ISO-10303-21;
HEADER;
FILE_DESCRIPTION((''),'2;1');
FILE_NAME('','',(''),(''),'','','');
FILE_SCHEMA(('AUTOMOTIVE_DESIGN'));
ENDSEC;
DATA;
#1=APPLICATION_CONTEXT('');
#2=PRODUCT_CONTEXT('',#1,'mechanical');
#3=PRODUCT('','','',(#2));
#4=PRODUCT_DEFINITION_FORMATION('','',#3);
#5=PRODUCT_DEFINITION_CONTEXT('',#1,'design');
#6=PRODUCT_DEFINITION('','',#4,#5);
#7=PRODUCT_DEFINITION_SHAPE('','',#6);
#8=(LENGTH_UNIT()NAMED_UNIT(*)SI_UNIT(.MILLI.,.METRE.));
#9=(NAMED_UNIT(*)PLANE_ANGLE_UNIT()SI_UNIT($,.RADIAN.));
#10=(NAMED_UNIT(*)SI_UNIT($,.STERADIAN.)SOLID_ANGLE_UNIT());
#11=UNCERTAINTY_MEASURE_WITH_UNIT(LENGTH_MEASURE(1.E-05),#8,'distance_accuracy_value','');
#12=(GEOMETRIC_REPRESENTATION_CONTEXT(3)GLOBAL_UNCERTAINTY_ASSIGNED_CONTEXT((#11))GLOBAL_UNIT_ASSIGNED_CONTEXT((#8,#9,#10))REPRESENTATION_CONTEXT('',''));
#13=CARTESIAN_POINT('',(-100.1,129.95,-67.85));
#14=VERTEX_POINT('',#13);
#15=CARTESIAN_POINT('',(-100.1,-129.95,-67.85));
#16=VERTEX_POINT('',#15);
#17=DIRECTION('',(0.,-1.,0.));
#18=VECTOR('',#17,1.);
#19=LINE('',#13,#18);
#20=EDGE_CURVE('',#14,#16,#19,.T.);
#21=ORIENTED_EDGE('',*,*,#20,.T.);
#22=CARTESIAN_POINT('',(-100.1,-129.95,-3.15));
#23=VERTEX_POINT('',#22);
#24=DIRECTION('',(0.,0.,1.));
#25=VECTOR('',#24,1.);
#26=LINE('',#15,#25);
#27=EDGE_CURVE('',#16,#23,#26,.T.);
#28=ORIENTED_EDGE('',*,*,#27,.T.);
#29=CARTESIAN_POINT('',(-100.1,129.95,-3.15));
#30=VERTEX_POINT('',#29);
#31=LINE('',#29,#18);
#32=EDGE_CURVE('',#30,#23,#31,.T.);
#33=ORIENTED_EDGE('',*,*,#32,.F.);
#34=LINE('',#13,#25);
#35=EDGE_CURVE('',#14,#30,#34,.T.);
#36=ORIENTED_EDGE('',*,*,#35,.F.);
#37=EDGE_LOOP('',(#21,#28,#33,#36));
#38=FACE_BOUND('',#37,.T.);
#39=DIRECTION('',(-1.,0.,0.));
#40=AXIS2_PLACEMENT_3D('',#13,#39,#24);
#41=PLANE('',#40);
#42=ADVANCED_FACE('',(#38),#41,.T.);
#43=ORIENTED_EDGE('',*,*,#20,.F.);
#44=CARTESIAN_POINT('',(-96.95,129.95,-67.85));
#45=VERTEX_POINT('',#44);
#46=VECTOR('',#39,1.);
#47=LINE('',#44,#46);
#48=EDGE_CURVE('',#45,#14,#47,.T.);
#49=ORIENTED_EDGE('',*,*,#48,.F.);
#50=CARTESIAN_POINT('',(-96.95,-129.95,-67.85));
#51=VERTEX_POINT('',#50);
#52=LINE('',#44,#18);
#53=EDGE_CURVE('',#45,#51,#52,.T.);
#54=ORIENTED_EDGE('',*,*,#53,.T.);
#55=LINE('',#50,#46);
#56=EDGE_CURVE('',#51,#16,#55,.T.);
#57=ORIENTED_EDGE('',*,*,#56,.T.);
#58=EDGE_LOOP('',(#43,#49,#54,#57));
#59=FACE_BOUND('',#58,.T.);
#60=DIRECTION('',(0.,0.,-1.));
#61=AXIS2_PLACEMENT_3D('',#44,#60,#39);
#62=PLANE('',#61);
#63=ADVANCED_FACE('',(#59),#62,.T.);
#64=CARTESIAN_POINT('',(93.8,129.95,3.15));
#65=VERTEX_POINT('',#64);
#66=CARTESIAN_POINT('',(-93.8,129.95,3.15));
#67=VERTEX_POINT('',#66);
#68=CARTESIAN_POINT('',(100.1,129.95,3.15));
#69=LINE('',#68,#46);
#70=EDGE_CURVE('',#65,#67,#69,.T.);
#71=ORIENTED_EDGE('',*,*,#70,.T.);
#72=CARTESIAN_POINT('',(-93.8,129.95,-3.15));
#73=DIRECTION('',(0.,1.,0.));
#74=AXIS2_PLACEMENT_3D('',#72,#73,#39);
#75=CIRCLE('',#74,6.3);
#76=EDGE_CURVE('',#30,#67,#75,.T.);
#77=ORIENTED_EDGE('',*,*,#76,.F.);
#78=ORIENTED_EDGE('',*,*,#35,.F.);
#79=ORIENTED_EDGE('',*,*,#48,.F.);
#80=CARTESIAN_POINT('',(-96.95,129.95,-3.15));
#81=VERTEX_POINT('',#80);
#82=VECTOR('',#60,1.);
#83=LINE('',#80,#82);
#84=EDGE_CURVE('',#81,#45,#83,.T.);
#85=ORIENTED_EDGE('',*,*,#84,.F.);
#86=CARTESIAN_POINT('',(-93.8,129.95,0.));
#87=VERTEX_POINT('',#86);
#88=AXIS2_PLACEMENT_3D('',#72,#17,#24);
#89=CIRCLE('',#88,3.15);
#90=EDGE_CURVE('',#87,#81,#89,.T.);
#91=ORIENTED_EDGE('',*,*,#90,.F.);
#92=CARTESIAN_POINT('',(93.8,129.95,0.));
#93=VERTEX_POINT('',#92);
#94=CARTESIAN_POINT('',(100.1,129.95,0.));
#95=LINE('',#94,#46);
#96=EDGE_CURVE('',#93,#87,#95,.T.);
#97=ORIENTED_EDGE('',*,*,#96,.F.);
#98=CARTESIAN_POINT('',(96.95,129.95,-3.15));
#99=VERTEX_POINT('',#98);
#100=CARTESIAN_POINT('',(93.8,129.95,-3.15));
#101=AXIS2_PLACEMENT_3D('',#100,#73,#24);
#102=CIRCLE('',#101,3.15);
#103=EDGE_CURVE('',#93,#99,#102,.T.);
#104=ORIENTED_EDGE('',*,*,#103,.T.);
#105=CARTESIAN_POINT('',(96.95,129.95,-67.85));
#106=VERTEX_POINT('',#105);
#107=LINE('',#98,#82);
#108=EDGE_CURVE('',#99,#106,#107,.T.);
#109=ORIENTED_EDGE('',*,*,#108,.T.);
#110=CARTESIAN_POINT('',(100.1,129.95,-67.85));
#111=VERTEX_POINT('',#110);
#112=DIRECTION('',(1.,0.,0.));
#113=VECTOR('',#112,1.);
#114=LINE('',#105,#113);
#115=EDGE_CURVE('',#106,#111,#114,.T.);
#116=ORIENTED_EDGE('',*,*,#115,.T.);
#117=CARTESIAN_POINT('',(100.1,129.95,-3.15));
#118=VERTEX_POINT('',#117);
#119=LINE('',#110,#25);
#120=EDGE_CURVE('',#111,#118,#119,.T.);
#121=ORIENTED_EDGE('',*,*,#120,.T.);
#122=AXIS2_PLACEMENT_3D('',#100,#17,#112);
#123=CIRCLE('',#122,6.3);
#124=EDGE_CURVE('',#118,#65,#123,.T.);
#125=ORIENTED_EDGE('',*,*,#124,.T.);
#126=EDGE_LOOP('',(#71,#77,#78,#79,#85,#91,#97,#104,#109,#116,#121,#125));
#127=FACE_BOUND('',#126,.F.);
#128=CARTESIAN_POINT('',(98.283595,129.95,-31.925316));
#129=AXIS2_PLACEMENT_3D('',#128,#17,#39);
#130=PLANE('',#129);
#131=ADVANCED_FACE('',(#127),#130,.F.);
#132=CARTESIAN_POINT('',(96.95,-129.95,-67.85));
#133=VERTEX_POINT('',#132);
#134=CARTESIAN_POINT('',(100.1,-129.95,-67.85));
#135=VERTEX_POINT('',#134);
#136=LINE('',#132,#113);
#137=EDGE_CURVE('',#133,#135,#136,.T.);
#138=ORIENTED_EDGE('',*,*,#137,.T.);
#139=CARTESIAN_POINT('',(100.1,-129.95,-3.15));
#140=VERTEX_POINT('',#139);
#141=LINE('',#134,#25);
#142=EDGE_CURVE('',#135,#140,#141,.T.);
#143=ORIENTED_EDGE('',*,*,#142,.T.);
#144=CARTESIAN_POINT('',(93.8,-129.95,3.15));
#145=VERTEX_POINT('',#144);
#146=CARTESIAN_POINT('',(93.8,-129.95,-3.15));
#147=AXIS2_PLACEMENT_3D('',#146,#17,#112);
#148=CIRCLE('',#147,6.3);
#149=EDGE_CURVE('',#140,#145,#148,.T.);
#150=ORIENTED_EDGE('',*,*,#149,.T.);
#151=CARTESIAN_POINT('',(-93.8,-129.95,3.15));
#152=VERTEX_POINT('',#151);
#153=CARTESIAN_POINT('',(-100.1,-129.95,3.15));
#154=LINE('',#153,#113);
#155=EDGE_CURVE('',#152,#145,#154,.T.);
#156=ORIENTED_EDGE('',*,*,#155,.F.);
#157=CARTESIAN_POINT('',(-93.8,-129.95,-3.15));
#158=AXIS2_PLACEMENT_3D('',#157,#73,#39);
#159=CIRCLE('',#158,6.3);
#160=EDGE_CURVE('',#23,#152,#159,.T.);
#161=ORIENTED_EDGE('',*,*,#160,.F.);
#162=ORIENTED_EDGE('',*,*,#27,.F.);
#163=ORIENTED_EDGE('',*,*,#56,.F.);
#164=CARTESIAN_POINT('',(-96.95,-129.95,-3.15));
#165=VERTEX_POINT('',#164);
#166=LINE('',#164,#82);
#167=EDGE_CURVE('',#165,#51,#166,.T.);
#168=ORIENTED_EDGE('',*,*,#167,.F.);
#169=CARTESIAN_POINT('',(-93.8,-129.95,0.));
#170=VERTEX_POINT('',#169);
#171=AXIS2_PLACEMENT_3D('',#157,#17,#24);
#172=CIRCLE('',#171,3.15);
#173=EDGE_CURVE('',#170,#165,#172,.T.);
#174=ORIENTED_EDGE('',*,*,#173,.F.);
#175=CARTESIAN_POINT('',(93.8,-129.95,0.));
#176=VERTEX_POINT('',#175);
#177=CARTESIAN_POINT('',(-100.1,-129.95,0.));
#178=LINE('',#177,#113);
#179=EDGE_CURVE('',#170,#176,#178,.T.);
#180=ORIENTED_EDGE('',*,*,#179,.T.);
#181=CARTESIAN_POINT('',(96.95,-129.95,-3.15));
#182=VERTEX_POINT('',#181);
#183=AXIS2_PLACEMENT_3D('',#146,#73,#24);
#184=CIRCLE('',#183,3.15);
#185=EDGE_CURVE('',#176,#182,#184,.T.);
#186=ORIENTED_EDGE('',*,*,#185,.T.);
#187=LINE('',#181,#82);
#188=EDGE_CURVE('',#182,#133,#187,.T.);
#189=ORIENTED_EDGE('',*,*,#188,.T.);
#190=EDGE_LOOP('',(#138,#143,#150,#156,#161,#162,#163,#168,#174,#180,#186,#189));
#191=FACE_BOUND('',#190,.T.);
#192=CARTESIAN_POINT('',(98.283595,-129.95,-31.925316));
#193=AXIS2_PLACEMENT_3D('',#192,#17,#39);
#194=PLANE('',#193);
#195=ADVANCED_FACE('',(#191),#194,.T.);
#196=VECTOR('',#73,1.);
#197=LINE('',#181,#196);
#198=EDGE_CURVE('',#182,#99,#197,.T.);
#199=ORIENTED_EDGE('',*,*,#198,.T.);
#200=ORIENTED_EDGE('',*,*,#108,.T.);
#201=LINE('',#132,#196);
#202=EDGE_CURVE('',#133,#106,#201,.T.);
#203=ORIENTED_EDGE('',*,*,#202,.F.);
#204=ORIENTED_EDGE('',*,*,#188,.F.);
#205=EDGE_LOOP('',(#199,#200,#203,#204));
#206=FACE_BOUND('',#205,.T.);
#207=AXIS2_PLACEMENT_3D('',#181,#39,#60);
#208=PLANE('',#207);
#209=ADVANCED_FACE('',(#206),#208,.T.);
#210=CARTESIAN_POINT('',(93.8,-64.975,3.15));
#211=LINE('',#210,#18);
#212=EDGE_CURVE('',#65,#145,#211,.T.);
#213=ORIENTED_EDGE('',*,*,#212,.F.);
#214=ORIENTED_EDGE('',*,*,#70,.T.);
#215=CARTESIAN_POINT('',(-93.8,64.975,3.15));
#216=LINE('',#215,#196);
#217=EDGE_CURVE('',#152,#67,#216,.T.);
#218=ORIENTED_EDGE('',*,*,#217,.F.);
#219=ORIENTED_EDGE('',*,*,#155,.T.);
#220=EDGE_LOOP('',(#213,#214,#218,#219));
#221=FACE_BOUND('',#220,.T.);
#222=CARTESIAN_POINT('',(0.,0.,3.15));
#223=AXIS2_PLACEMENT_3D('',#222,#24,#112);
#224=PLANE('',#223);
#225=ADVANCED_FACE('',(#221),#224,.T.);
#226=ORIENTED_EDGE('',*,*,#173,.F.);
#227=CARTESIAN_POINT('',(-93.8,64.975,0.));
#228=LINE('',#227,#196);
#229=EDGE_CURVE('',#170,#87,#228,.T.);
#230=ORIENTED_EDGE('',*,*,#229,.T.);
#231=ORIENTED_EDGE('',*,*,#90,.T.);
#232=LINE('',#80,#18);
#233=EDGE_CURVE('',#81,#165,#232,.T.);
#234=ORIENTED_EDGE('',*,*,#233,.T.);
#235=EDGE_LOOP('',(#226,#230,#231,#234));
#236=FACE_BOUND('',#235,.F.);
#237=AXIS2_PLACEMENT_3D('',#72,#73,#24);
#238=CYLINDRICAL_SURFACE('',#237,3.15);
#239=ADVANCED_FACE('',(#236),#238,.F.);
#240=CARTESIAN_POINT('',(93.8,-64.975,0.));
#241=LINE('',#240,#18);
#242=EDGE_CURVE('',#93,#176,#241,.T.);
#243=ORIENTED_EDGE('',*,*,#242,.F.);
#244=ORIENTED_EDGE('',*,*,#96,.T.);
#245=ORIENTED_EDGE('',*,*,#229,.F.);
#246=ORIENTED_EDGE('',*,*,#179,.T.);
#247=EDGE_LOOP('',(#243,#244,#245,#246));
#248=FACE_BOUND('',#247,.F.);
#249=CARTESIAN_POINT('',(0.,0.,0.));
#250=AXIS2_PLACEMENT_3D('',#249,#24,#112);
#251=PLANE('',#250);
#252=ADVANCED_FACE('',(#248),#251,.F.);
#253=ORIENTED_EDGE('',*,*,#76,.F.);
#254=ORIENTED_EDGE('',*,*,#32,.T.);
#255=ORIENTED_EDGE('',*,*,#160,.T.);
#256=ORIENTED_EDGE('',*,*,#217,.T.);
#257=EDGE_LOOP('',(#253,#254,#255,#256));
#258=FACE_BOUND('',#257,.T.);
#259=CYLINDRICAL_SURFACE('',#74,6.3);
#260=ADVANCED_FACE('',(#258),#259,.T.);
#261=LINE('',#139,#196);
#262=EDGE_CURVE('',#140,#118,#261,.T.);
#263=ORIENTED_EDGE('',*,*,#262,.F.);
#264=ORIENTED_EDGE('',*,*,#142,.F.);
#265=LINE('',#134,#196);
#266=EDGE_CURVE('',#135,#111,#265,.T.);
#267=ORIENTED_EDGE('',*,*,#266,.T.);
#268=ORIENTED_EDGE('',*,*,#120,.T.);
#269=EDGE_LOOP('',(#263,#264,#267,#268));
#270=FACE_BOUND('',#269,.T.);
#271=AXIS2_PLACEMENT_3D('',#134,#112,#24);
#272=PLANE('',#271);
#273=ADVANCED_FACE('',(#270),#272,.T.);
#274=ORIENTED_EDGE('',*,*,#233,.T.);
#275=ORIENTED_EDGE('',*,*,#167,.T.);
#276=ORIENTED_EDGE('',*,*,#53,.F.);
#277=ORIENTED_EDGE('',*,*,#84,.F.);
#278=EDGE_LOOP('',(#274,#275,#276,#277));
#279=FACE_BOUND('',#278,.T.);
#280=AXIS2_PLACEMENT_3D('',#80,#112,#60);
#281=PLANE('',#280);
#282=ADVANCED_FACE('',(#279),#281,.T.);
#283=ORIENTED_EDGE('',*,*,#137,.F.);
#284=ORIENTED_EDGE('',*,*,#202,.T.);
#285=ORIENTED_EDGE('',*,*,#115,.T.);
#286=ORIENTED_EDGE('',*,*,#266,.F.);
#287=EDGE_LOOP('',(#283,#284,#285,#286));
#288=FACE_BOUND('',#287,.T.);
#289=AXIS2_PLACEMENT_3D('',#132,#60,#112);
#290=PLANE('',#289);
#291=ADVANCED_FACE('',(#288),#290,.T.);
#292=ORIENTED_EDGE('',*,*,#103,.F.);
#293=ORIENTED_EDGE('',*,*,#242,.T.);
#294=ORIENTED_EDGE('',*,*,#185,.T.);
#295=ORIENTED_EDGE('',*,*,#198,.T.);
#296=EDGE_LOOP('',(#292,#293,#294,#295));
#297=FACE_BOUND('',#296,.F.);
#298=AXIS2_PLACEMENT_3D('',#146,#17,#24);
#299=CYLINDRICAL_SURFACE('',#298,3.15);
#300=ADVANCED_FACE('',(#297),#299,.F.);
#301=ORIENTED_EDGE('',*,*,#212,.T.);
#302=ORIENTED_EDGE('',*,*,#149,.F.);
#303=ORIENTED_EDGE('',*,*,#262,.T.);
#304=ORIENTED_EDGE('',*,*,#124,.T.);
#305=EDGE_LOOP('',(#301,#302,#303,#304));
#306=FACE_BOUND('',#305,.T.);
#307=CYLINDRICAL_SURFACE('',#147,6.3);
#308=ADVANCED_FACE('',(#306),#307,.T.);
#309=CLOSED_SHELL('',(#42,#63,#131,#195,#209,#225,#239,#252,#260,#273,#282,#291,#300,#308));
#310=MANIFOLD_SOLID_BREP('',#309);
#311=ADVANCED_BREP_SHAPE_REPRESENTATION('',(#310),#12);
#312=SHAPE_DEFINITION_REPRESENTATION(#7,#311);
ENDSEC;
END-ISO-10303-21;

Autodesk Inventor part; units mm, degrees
ref_plane "YZ Plane" through (0, 0, 0) normal (1, 0, 0) x (0, 1, 0)
ref_plane "XZ Plane" through (0, 0, 0) normal (0, 1, 0) x (-1, 0, 0)
ref_plane "XY Plane" through (0, 0, 0) normal (0, 0, 1) x (1, 0, 0)
sketch "Sketch1" plane through (0, 0, 0) normal (0, 0, 1) x (1, 0, 0)
  line L0 (-100.1, -129.95) -> (100.1, -129.95)
  line L1 (100.1, -129.95) -> (100.1, 129.95)
  line L2 (100.1, 129.95) -> (-100.1, 129.95)
  line L3 (-100.1, 129.95) -> (-100.1, -129.95)
  line L4 (-100.1, -129.95) -> (100.1, 129.95) construction
  line L5 (100.1, -129.95) -> (-100.1, 129.95) construction
  point P0 (0, 0)
  dimension "d0" = 200.2
  dimension "d1" = 259.9
extrude "Plate1" add sketch "Sketch1" along normal blind 3.15
sketch "Sketch2" plane through (96.95, -129.95, 3.15) normal (1, 0, 0) x (0, 1, 0)
  line L0 (259.9, 0) -> (0, 0)
  line L1 (0, 0) -> (0, -71)
  line L2 (0, -71) -> (259.9, -71)
  line L3 (259.9, -71) -> (259.9, 0)
edge flange "Flange1" height 71 angle 90 thickness 3.15 bend radius 3.15 thickness toward (1, 0, 0) relief tear relief width 3.15 relief depth 1.575 corner gap 3.15 corner form 0 edges at (100.1, 0, 0) (-100.1, 0, 0) wall of the first edge with corners at (96.95, 129.95, 3.15) (96.95, -129.95, 3.15) (96.95, -129.95, -67.85) (96.95, 129.95, -67.85)
bend "Bend1"
corner "Corner1"
equation "\"d0\" = shield_x"
equation "\"d1\" = shield_z"
equation "\"Thickness\" = shield_t"
equation "\"d3\" = BendReliefWidth"
equation "\"d4\" = BendReliefDepth"
equation "\"d5\" = MinimumRemnant"
equation "\"d6\" = BendRadius"
equation "\"d7\" = shield_y"
equation "\"d9\" = BendRadius"
equation "\"d10\" = CornerReliefSize"
equation "\"d11\" = GapSize"
equation "\"d12\" = JacobiRadiusSize"
equation "\"BendRadius\" = Thickness"
equation "\"BendReliefWidth\" = Thickness"
equation "\"BendReliefDepth\" = 0.5 * Thickness"
equation "\"CornerReliefSize\" = 4 * Thickness"
equation "\"MinimumRemnant\" = 2 * Thickness"
equation "\"TransitionRadius\" = BendRadius"
equation "\"JacobiRadiusSize\" = BendRadius"
equation "\"GapSize\" = Thickness"
equation "\"laserresin\" = 5"
equation "\"st1_thickness\" = 0.91186"
equation "\"st2_thickness\" = 1.5875"
equation "\"al1_thickness\" = 0.79375"
equation "\"al2_thickness\" = 1.5875"
equation "\"bend_factor\" = 2.26205"
equation "\"st1_bend\" = 2.06267"
equation "\"st2_bend\" = 3.591"
equation "\"st3_bend\" = 113.10236"
equation "\"al1_bend\" = 1.7955"
equation "\"al2_bend\" = 3.591"
equation "\"al3_bend\" = 113.10236"
equation "\"acrylic1_thickness\" = 5.88"
equation "\"acrylic2_thickness\" = 3.15"
equation "\"acrylic3_thickness\" = 3.15"
equation "\"corner_small_r\" = 1"
equation "\"corner_big_r\" = 5"
equation "\"linear_bearing_spacing\" = 208"
equation "\"galvo_y_out_offset\" = 27"
equation "\"galvo_y_in_offset\" = 17.5"
equation "\"laser_diameter\" = 13"
equation "\"nema17_x\" = 43"
equation "\"nema17_shaft\" = 24"
equation "\"lmk8uu_x\" = 25"
equation "\"lmk8uu_shaft\" = 15"
equation "\"lmk8uu_z\" = 24"
equation "\"shf8_y\" = 43"
equation "\"acme_nut_d\" = 19.1"
equation "\"acme_nut_upper_d\" = 12.7"
equation "\"handle_spacing\" = 50.8"
equation "\"handle_d\" = 4.7625"
equation "\"handle_hole_d\" = 2.845"
equation "\"handle_projection\" = 20.6375"
equation "\"switch_spacing\" = 19"
equation "\"laser_body_diameter\" = 12"
equation "\"m3_diameter\" = 3"
equation "\"m3_head\" = 6"
equation "\"m4_diameter\" = 4"
equation "\"m5_diameter\" = 5"
equation "\"m5_head\" = 10.3"
equation "\"rivet1_diameter\" = 3.26"
equation "\"rivet2_diameter\" = 3.26"
equation "\"brass_insert_drill\" = 4"
equation "\"m5_brass_insert_drill\" = 6.7"
equation "\"m3_press_nut_drill\" = 4.5"
equation "\"m5_press_nut_drill\" = 6.5"
equation "\"platform_t\" = 1.5875"
equation "\"platform_z\" = 65"
equation "\"platform_fold_x\" = 15"
equation "\"platform_crane_gap\" = 0.1"
equation "\"platform_gap\" = 0.1"
equation "\"platform_upper_y\" = 46.625"
equation "\"crane_t\" = 1.5875"
equation "\"crane_x\" = 233"
equation "\"crane_gap\" = 0.1"
equation "\"tray_t\" = 5.88"
equation "\"tray_to_platform_oversize\" = 0"
equation "\"reservoir_t\" = 0.91186"
equation "\"reservoir_z\" = 35"
equation "\"reservoir_flap_y\" = 20.91186"
equation "\"frame_front_t\" = 0.91186"
equation "\"frame_front_y\" = 56"
equation "\"frame_front_fold\" = 15"
equation "\"frame_gap\" = 0.1"
equation "\"frame_back_t\" = 0.91186"
equation "\"frame_back_x\" = 277.97628"
equation "\"frame_back_y\" = 53.97628"
equation "\"frame_back_z\" = 497.97628"
equation "\"drawer_t\" = 0.91186"
equation "\"drawer_gap\" = 0.1"
equation "\"drawer_reservoir_overlap_x\" = 24.08814"
equation "\"drawer_x\" = 202.02372"
equation "\"drawer_y\" = 73"
equation "\"drawer_seal_y\" = 101"
equation "\"drawer_window_gap\" = 6"
equation "\"foot_t\" = 0.91186"
equation "\"foot_x\" = 198"
equation "\"foot_y\" = 196"
equation "\"laser_holder_t\" = 0.91186"
equation "\"laser_holder_z\" = 75"
equation "\"laser_offset_x\" = 59"
equation "\"laser_offset_y\" = 8.5"
equation "\"subframe_t\" = 0.79375"
equation "\"subframe_x\" = 66"
equation "\"subframe_y\" = 55"
equation "\"shield_t\" = 3.15"
equation "\"shield_x\" = 200.2"
equation "\"shield_y\" = 71"
equation "\"shield_z\" = 259.9"
equation "\"magnet_t\" = 1.6"
equation "\"magnet_w\" = 12.8"
equation "\"d2\" = BendRadius"
equation "\"sae_4_40_diameter\" = 2.845"
properties part number "shield2a"
